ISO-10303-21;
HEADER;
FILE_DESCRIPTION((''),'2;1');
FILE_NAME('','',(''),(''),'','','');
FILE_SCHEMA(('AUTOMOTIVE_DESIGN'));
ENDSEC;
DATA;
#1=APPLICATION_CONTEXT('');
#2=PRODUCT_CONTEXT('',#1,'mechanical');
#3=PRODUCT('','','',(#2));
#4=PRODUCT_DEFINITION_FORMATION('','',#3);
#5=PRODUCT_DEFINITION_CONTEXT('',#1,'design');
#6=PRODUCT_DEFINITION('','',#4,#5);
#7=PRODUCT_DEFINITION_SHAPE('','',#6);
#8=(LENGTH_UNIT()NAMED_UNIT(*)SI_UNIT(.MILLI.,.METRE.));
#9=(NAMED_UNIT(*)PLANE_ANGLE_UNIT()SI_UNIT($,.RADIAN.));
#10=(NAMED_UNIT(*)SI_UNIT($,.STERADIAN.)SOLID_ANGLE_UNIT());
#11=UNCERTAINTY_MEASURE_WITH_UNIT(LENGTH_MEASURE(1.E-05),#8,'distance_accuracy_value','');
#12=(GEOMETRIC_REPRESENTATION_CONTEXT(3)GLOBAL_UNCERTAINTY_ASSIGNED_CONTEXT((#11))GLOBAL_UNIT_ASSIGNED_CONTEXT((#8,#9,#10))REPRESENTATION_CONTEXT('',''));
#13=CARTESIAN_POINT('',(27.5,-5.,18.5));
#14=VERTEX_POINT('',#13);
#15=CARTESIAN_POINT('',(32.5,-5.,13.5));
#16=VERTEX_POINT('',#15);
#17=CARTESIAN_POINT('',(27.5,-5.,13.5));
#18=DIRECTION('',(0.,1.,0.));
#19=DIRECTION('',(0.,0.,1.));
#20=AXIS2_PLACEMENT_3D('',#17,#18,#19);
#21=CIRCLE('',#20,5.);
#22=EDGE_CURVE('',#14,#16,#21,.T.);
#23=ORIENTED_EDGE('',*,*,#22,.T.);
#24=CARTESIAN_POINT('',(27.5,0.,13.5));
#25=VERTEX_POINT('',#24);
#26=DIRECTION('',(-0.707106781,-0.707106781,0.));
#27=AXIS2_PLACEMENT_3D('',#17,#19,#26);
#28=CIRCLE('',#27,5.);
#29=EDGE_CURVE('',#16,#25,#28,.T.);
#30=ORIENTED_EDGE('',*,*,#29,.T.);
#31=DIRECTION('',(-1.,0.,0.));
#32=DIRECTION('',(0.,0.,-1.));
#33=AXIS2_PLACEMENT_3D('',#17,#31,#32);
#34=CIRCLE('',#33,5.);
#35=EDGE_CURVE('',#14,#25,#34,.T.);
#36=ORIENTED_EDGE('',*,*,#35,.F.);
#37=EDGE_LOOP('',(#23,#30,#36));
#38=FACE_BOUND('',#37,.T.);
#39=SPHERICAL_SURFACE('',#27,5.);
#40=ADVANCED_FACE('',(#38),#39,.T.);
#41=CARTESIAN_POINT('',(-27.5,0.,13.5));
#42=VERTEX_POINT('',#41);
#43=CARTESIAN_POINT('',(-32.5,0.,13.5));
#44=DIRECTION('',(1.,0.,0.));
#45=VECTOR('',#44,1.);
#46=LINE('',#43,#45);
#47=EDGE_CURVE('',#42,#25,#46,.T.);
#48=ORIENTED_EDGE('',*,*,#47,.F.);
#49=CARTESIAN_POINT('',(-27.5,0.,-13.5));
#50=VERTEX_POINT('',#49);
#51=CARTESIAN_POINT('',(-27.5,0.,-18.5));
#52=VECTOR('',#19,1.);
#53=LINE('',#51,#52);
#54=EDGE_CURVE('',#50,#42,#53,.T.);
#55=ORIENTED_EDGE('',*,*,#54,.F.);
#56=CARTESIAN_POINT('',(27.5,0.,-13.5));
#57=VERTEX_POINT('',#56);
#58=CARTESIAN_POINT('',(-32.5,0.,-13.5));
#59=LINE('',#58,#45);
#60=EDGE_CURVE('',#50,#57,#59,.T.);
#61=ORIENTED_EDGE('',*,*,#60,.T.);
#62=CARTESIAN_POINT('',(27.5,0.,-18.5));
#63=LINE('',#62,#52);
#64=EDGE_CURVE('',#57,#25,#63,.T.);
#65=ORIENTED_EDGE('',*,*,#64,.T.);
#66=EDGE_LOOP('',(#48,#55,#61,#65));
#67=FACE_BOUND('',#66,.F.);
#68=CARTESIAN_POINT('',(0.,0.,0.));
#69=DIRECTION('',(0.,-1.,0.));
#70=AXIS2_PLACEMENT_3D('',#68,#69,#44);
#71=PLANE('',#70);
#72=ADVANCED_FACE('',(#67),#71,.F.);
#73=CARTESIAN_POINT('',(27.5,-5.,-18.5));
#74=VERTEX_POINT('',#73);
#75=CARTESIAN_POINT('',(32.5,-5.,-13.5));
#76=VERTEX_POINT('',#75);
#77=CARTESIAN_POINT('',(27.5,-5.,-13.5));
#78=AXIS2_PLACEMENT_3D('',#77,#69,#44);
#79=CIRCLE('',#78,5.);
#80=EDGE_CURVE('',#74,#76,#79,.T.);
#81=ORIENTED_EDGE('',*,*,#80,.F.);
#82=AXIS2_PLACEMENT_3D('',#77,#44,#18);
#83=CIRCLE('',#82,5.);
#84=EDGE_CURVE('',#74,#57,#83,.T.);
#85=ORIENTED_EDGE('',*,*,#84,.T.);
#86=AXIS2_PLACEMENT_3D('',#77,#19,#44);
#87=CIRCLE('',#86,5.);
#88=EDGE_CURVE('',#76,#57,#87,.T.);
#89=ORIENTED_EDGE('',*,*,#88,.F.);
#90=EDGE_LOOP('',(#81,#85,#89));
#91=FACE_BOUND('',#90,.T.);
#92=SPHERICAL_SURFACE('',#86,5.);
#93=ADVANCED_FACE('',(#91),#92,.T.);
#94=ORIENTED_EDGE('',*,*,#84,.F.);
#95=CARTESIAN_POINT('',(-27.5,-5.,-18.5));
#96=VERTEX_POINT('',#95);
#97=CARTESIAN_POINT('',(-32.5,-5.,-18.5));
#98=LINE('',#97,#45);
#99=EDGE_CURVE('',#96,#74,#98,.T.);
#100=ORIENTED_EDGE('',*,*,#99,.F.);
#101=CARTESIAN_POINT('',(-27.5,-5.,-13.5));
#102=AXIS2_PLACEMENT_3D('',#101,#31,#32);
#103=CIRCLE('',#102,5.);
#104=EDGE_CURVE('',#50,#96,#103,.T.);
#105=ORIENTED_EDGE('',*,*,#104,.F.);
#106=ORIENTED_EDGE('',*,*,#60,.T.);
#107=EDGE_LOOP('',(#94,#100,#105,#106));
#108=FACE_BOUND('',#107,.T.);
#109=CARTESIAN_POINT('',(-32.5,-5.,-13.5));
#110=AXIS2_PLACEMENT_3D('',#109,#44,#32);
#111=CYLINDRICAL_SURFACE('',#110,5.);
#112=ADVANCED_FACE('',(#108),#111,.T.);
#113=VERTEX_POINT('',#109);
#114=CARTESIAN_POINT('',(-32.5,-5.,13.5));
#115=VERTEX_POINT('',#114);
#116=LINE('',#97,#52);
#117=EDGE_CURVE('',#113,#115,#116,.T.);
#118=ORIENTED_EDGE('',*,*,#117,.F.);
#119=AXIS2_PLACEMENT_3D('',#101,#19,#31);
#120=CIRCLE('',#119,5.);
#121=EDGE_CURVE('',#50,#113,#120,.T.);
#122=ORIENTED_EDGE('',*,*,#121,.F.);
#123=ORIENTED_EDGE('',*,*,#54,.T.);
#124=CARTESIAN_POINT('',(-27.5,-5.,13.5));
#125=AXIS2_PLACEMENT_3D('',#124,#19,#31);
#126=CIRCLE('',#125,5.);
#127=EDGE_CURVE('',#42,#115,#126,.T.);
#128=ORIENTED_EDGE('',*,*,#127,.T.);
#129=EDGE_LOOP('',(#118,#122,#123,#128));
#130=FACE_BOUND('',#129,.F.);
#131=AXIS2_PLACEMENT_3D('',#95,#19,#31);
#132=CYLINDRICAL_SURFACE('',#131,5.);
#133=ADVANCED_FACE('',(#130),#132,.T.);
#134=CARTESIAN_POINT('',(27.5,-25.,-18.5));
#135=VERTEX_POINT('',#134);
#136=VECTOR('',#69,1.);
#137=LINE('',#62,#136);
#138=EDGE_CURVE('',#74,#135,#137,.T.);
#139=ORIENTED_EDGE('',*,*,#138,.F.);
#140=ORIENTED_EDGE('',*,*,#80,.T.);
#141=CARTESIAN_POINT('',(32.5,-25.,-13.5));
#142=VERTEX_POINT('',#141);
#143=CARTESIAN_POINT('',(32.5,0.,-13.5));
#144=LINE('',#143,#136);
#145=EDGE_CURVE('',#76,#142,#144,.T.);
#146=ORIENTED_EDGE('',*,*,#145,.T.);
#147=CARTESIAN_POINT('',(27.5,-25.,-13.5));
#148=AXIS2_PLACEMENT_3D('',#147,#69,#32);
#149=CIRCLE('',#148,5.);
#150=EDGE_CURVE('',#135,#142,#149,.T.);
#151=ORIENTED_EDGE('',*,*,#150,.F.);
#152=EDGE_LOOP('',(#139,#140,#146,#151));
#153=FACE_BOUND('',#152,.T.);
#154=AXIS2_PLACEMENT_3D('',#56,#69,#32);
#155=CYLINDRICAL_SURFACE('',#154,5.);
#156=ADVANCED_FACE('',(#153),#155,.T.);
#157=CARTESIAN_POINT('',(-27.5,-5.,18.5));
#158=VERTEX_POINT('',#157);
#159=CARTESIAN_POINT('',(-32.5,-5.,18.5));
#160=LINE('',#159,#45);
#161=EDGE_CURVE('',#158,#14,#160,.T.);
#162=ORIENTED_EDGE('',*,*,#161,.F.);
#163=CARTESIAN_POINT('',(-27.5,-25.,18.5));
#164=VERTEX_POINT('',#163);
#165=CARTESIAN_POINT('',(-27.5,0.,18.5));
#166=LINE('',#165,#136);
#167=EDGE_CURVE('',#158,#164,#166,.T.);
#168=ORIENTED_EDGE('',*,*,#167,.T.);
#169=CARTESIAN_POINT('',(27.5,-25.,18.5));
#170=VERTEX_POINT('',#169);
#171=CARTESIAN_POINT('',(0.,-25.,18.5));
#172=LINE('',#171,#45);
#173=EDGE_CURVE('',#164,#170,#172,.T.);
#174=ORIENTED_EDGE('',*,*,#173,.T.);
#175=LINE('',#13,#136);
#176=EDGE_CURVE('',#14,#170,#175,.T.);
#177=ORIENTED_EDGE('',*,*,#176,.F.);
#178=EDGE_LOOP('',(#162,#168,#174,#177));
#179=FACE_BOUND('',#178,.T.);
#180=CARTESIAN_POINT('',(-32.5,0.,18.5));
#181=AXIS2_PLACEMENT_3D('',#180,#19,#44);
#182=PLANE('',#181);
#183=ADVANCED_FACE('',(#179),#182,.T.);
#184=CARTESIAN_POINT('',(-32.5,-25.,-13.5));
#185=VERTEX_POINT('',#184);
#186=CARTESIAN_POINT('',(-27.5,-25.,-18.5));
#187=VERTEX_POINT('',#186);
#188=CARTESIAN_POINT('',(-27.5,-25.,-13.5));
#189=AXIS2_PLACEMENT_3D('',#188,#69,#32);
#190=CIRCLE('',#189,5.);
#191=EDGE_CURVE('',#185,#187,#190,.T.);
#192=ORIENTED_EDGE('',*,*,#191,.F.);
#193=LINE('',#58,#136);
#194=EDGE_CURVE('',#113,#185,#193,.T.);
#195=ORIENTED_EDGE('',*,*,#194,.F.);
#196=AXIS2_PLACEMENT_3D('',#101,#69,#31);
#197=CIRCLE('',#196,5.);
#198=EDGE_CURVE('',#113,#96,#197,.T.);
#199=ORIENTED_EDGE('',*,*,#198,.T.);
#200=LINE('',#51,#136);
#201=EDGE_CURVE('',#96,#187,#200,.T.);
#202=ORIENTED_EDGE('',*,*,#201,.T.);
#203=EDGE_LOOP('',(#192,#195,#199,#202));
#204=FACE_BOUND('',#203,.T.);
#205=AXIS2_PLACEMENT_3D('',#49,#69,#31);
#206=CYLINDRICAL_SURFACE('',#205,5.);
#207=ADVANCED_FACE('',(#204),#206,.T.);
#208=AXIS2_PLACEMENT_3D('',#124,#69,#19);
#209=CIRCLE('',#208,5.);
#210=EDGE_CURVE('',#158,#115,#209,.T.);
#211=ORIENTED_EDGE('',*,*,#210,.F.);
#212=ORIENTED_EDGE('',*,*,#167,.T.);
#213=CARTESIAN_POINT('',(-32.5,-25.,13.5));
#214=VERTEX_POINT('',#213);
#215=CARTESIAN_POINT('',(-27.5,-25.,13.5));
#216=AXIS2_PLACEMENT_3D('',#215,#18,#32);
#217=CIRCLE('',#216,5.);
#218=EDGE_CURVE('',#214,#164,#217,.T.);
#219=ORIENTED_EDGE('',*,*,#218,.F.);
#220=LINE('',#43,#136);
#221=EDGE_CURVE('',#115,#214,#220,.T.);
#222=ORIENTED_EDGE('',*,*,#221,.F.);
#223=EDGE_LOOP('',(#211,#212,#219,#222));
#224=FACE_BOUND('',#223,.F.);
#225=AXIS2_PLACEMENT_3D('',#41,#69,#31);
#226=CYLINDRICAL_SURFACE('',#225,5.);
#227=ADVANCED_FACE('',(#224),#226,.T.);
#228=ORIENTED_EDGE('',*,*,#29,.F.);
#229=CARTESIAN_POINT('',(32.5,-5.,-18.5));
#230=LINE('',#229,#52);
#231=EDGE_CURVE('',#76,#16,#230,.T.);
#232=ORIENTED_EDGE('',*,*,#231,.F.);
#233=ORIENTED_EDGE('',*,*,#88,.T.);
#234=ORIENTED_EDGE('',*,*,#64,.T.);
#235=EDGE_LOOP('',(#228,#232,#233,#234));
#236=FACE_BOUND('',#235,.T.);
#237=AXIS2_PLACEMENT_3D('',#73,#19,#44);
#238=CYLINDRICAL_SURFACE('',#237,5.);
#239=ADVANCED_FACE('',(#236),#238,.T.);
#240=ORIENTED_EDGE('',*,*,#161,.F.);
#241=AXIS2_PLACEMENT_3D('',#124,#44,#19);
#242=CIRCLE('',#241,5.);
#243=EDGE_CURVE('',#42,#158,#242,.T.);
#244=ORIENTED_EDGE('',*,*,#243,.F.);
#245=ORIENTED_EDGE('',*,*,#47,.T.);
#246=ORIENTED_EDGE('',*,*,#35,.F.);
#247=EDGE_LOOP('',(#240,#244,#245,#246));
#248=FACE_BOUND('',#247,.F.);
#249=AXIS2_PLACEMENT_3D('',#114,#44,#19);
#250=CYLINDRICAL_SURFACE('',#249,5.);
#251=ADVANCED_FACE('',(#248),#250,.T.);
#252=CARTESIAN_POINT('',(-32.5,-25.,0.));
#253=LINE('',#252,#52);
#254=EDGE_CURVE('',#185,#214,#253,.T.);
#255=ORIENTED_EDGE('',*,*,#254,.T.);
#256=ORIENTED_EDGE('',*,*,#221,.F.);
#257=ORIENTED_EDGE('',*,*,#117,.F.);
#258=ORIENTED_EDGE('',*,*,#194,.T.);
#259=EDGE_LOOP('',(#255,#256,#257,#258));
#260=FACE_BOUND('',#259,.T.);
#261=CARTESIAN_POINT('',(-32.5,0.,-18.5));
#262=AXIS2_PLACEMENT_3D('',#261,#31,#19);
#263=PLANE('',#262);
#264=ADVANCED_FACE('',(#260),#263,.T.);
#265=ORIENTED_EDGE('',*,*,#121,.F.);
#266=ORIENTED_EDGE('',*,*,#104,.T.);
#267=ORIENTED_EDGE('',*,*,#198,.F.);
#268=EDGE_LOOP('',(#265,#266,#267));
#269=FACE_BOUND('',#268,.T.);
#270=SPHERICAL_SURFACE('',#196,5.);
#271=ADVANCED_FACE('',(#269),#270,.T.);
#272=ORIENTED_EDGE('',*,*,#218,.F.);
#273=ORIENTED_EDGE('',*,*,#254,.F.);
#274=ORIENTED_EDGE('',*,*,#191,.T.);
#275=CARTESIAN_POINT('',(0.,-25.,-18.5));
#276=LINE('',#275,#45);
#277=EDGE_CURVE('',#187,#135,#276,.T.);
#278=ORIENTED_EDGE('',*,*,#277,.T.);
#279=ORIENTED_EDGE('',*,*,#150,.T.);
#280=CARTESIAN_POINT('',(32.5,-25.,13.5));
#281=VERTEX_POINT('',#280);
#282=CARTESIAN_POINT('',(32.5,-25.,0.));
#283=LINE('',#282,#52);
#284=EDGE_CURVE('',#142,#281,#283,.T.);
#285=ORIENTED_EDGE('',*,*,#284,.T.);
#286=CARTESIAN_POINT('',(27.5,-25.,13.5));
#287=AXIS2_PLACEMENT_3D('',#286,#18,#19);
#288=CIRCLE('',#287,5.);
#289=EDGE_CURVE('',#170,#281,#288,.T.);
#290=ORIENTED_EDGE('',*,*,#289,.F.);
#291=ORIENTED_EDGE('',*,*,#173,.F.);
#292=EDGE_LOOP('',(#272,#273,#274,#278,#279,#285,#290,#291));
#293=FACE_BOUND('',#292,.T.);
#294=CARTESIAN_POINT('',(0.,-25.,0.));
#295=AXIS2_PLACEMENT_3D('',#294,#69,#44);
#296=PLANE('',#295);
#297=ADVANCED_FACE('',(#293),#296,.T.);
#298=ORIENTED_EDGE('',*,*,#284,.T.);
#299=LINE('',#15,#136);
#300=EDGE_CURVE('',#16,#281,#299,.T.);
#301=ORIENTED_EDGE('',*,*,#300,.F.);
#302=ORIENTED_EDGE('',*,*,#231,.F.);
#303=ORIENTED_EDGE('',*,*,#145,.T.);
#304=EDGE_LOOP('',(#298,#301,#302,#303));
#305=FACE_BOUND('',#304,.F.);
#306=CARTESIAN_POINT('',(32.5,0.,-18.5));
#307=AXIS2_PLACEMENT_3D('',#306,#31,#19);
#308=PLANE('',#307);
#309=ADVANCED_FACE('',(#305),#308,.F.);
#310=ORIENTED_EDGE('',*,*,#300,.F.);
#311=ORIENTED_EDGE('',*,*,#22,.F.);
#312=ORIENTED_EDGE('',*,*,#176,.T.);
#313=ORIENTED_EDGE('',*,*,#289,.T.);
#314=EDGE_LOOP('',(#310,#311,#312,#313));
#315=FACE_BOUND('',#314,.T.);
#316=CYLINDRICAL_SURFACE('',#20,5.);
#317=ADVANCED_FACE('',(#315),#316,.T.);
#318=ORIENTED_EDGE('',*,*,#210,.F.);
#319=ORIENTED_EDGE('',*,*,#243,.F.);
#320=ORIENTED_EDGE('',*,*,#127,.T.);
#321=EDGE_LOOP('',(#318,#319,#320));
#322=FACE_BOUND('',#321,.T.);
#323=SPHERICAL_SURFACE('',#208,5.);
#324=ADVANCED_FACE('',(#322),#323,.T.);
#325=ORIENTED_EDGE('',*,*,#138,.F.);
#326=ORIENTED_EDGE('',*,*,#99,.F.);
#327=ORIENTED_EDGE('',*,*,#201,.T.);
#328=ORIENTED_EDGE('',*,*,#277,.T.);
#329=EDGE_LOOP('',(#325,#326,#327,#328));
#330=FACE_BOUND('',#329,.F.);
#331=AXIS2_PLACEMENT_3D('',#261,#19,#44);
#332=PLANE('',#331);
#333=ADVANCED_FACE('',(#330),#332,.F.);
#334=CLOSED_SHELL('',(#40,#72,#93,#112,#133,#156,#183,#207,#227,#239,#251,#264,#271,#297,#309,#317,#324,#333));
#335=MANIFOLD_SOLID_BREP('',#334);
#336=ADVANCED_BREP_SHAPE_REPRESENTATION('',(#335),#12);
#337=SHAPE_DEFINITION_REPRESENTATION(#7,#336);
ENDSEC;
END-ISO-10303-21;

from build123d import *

# Parameters (mm, degrees)
F0_W        = 65
F0_H        = 37
F1_DEPTH    = 25
F2_R        = 5
F3_T1_DEPTH = 32.5
F3_S5_W     = 5
F3_S5_H     = 5
F3_T6_DEPTH = 5


# Not quite as in the source:
# - a fillet or chamfer that OpenCascade refuses, or shapes differently, is made with other operations: its cross-section is extruded or revolved along the edge and cut away or added


with BuildPart() as f1:
    # F0 (on Front) → F1 (new body)
    with BuildSketch(Plane.XZ):
        Rectangle(F0_W, F0_H)
    extrude(amount=F1_DEPTH)

    # F2
    f2_edges = [f1.edges().sort_by_distance(p)[0] for p in [
        (-32.5, -12.5, 18.5),
        (-32.5, -12.5, -18.5),
        (0, 0, 18.5),
        (-32.5, 0, 0),
        (32.5, 0, 0),
        (32.5, -12.5, -18.5),
        (0, 0, -18.5),
    ]]
    fillet(f2_edges, radius=F2_R)

    # F3: fillet of radius 5 on 1 edges, made by hand

    # F3_s2 → F3_t1 (cut)
    with BuildSketch(Plane.XZ.offset(5)):
        with BuildLine():
            ThreePointArc((27.5, 18.5), (31.0355339059, 17.0355339059), (32.5, 13.5))
            Line((32.5, 13.5), (32.5, 18.5))
            Line((32.5, 18.5), (27.5, 18.5))
        make_face()
    extrude(amount=F3_T1_DEPTH, mode=Mode.SUBTRACT)


with BuildPart() as f3_tool4:
    # F3_s5 → F3_t6 (new body)
    with BuildSketch(Plane.XY.offset(13.5)):
        with Locations((30, -2.5)):
            Rectangle(F3_S5_W, F3_S5_H)
    extrude(amount=F3_T6_DEPTH)

    # F3_s7 → F3_t8 (revolve, cut)
    with BuildSketch(Plane(origin=(27.5, -5, 13.5), x_dir=(-0.7071067812, -0.7071067812, 0), z_dir=(-0.7071067812, 0.7071067812, 0))):
        with BuildLine():
            ThreePointArc((0, -5), (5, 0), (0, 5))
            Line((0, 5), (0, -5))
        make_face()
    revolve(axis=Axis((27.5, -5, 13.5), (0, 0, 1)), mode=Mode.SUBTRACT)


with BuildPart() as f1_1:
    add(f1.part)

    # F3_t3: cut F3_tool4
    add(f3_tool4.part, mode=Mode.SUBTRACT)


solid = f1_1.part
